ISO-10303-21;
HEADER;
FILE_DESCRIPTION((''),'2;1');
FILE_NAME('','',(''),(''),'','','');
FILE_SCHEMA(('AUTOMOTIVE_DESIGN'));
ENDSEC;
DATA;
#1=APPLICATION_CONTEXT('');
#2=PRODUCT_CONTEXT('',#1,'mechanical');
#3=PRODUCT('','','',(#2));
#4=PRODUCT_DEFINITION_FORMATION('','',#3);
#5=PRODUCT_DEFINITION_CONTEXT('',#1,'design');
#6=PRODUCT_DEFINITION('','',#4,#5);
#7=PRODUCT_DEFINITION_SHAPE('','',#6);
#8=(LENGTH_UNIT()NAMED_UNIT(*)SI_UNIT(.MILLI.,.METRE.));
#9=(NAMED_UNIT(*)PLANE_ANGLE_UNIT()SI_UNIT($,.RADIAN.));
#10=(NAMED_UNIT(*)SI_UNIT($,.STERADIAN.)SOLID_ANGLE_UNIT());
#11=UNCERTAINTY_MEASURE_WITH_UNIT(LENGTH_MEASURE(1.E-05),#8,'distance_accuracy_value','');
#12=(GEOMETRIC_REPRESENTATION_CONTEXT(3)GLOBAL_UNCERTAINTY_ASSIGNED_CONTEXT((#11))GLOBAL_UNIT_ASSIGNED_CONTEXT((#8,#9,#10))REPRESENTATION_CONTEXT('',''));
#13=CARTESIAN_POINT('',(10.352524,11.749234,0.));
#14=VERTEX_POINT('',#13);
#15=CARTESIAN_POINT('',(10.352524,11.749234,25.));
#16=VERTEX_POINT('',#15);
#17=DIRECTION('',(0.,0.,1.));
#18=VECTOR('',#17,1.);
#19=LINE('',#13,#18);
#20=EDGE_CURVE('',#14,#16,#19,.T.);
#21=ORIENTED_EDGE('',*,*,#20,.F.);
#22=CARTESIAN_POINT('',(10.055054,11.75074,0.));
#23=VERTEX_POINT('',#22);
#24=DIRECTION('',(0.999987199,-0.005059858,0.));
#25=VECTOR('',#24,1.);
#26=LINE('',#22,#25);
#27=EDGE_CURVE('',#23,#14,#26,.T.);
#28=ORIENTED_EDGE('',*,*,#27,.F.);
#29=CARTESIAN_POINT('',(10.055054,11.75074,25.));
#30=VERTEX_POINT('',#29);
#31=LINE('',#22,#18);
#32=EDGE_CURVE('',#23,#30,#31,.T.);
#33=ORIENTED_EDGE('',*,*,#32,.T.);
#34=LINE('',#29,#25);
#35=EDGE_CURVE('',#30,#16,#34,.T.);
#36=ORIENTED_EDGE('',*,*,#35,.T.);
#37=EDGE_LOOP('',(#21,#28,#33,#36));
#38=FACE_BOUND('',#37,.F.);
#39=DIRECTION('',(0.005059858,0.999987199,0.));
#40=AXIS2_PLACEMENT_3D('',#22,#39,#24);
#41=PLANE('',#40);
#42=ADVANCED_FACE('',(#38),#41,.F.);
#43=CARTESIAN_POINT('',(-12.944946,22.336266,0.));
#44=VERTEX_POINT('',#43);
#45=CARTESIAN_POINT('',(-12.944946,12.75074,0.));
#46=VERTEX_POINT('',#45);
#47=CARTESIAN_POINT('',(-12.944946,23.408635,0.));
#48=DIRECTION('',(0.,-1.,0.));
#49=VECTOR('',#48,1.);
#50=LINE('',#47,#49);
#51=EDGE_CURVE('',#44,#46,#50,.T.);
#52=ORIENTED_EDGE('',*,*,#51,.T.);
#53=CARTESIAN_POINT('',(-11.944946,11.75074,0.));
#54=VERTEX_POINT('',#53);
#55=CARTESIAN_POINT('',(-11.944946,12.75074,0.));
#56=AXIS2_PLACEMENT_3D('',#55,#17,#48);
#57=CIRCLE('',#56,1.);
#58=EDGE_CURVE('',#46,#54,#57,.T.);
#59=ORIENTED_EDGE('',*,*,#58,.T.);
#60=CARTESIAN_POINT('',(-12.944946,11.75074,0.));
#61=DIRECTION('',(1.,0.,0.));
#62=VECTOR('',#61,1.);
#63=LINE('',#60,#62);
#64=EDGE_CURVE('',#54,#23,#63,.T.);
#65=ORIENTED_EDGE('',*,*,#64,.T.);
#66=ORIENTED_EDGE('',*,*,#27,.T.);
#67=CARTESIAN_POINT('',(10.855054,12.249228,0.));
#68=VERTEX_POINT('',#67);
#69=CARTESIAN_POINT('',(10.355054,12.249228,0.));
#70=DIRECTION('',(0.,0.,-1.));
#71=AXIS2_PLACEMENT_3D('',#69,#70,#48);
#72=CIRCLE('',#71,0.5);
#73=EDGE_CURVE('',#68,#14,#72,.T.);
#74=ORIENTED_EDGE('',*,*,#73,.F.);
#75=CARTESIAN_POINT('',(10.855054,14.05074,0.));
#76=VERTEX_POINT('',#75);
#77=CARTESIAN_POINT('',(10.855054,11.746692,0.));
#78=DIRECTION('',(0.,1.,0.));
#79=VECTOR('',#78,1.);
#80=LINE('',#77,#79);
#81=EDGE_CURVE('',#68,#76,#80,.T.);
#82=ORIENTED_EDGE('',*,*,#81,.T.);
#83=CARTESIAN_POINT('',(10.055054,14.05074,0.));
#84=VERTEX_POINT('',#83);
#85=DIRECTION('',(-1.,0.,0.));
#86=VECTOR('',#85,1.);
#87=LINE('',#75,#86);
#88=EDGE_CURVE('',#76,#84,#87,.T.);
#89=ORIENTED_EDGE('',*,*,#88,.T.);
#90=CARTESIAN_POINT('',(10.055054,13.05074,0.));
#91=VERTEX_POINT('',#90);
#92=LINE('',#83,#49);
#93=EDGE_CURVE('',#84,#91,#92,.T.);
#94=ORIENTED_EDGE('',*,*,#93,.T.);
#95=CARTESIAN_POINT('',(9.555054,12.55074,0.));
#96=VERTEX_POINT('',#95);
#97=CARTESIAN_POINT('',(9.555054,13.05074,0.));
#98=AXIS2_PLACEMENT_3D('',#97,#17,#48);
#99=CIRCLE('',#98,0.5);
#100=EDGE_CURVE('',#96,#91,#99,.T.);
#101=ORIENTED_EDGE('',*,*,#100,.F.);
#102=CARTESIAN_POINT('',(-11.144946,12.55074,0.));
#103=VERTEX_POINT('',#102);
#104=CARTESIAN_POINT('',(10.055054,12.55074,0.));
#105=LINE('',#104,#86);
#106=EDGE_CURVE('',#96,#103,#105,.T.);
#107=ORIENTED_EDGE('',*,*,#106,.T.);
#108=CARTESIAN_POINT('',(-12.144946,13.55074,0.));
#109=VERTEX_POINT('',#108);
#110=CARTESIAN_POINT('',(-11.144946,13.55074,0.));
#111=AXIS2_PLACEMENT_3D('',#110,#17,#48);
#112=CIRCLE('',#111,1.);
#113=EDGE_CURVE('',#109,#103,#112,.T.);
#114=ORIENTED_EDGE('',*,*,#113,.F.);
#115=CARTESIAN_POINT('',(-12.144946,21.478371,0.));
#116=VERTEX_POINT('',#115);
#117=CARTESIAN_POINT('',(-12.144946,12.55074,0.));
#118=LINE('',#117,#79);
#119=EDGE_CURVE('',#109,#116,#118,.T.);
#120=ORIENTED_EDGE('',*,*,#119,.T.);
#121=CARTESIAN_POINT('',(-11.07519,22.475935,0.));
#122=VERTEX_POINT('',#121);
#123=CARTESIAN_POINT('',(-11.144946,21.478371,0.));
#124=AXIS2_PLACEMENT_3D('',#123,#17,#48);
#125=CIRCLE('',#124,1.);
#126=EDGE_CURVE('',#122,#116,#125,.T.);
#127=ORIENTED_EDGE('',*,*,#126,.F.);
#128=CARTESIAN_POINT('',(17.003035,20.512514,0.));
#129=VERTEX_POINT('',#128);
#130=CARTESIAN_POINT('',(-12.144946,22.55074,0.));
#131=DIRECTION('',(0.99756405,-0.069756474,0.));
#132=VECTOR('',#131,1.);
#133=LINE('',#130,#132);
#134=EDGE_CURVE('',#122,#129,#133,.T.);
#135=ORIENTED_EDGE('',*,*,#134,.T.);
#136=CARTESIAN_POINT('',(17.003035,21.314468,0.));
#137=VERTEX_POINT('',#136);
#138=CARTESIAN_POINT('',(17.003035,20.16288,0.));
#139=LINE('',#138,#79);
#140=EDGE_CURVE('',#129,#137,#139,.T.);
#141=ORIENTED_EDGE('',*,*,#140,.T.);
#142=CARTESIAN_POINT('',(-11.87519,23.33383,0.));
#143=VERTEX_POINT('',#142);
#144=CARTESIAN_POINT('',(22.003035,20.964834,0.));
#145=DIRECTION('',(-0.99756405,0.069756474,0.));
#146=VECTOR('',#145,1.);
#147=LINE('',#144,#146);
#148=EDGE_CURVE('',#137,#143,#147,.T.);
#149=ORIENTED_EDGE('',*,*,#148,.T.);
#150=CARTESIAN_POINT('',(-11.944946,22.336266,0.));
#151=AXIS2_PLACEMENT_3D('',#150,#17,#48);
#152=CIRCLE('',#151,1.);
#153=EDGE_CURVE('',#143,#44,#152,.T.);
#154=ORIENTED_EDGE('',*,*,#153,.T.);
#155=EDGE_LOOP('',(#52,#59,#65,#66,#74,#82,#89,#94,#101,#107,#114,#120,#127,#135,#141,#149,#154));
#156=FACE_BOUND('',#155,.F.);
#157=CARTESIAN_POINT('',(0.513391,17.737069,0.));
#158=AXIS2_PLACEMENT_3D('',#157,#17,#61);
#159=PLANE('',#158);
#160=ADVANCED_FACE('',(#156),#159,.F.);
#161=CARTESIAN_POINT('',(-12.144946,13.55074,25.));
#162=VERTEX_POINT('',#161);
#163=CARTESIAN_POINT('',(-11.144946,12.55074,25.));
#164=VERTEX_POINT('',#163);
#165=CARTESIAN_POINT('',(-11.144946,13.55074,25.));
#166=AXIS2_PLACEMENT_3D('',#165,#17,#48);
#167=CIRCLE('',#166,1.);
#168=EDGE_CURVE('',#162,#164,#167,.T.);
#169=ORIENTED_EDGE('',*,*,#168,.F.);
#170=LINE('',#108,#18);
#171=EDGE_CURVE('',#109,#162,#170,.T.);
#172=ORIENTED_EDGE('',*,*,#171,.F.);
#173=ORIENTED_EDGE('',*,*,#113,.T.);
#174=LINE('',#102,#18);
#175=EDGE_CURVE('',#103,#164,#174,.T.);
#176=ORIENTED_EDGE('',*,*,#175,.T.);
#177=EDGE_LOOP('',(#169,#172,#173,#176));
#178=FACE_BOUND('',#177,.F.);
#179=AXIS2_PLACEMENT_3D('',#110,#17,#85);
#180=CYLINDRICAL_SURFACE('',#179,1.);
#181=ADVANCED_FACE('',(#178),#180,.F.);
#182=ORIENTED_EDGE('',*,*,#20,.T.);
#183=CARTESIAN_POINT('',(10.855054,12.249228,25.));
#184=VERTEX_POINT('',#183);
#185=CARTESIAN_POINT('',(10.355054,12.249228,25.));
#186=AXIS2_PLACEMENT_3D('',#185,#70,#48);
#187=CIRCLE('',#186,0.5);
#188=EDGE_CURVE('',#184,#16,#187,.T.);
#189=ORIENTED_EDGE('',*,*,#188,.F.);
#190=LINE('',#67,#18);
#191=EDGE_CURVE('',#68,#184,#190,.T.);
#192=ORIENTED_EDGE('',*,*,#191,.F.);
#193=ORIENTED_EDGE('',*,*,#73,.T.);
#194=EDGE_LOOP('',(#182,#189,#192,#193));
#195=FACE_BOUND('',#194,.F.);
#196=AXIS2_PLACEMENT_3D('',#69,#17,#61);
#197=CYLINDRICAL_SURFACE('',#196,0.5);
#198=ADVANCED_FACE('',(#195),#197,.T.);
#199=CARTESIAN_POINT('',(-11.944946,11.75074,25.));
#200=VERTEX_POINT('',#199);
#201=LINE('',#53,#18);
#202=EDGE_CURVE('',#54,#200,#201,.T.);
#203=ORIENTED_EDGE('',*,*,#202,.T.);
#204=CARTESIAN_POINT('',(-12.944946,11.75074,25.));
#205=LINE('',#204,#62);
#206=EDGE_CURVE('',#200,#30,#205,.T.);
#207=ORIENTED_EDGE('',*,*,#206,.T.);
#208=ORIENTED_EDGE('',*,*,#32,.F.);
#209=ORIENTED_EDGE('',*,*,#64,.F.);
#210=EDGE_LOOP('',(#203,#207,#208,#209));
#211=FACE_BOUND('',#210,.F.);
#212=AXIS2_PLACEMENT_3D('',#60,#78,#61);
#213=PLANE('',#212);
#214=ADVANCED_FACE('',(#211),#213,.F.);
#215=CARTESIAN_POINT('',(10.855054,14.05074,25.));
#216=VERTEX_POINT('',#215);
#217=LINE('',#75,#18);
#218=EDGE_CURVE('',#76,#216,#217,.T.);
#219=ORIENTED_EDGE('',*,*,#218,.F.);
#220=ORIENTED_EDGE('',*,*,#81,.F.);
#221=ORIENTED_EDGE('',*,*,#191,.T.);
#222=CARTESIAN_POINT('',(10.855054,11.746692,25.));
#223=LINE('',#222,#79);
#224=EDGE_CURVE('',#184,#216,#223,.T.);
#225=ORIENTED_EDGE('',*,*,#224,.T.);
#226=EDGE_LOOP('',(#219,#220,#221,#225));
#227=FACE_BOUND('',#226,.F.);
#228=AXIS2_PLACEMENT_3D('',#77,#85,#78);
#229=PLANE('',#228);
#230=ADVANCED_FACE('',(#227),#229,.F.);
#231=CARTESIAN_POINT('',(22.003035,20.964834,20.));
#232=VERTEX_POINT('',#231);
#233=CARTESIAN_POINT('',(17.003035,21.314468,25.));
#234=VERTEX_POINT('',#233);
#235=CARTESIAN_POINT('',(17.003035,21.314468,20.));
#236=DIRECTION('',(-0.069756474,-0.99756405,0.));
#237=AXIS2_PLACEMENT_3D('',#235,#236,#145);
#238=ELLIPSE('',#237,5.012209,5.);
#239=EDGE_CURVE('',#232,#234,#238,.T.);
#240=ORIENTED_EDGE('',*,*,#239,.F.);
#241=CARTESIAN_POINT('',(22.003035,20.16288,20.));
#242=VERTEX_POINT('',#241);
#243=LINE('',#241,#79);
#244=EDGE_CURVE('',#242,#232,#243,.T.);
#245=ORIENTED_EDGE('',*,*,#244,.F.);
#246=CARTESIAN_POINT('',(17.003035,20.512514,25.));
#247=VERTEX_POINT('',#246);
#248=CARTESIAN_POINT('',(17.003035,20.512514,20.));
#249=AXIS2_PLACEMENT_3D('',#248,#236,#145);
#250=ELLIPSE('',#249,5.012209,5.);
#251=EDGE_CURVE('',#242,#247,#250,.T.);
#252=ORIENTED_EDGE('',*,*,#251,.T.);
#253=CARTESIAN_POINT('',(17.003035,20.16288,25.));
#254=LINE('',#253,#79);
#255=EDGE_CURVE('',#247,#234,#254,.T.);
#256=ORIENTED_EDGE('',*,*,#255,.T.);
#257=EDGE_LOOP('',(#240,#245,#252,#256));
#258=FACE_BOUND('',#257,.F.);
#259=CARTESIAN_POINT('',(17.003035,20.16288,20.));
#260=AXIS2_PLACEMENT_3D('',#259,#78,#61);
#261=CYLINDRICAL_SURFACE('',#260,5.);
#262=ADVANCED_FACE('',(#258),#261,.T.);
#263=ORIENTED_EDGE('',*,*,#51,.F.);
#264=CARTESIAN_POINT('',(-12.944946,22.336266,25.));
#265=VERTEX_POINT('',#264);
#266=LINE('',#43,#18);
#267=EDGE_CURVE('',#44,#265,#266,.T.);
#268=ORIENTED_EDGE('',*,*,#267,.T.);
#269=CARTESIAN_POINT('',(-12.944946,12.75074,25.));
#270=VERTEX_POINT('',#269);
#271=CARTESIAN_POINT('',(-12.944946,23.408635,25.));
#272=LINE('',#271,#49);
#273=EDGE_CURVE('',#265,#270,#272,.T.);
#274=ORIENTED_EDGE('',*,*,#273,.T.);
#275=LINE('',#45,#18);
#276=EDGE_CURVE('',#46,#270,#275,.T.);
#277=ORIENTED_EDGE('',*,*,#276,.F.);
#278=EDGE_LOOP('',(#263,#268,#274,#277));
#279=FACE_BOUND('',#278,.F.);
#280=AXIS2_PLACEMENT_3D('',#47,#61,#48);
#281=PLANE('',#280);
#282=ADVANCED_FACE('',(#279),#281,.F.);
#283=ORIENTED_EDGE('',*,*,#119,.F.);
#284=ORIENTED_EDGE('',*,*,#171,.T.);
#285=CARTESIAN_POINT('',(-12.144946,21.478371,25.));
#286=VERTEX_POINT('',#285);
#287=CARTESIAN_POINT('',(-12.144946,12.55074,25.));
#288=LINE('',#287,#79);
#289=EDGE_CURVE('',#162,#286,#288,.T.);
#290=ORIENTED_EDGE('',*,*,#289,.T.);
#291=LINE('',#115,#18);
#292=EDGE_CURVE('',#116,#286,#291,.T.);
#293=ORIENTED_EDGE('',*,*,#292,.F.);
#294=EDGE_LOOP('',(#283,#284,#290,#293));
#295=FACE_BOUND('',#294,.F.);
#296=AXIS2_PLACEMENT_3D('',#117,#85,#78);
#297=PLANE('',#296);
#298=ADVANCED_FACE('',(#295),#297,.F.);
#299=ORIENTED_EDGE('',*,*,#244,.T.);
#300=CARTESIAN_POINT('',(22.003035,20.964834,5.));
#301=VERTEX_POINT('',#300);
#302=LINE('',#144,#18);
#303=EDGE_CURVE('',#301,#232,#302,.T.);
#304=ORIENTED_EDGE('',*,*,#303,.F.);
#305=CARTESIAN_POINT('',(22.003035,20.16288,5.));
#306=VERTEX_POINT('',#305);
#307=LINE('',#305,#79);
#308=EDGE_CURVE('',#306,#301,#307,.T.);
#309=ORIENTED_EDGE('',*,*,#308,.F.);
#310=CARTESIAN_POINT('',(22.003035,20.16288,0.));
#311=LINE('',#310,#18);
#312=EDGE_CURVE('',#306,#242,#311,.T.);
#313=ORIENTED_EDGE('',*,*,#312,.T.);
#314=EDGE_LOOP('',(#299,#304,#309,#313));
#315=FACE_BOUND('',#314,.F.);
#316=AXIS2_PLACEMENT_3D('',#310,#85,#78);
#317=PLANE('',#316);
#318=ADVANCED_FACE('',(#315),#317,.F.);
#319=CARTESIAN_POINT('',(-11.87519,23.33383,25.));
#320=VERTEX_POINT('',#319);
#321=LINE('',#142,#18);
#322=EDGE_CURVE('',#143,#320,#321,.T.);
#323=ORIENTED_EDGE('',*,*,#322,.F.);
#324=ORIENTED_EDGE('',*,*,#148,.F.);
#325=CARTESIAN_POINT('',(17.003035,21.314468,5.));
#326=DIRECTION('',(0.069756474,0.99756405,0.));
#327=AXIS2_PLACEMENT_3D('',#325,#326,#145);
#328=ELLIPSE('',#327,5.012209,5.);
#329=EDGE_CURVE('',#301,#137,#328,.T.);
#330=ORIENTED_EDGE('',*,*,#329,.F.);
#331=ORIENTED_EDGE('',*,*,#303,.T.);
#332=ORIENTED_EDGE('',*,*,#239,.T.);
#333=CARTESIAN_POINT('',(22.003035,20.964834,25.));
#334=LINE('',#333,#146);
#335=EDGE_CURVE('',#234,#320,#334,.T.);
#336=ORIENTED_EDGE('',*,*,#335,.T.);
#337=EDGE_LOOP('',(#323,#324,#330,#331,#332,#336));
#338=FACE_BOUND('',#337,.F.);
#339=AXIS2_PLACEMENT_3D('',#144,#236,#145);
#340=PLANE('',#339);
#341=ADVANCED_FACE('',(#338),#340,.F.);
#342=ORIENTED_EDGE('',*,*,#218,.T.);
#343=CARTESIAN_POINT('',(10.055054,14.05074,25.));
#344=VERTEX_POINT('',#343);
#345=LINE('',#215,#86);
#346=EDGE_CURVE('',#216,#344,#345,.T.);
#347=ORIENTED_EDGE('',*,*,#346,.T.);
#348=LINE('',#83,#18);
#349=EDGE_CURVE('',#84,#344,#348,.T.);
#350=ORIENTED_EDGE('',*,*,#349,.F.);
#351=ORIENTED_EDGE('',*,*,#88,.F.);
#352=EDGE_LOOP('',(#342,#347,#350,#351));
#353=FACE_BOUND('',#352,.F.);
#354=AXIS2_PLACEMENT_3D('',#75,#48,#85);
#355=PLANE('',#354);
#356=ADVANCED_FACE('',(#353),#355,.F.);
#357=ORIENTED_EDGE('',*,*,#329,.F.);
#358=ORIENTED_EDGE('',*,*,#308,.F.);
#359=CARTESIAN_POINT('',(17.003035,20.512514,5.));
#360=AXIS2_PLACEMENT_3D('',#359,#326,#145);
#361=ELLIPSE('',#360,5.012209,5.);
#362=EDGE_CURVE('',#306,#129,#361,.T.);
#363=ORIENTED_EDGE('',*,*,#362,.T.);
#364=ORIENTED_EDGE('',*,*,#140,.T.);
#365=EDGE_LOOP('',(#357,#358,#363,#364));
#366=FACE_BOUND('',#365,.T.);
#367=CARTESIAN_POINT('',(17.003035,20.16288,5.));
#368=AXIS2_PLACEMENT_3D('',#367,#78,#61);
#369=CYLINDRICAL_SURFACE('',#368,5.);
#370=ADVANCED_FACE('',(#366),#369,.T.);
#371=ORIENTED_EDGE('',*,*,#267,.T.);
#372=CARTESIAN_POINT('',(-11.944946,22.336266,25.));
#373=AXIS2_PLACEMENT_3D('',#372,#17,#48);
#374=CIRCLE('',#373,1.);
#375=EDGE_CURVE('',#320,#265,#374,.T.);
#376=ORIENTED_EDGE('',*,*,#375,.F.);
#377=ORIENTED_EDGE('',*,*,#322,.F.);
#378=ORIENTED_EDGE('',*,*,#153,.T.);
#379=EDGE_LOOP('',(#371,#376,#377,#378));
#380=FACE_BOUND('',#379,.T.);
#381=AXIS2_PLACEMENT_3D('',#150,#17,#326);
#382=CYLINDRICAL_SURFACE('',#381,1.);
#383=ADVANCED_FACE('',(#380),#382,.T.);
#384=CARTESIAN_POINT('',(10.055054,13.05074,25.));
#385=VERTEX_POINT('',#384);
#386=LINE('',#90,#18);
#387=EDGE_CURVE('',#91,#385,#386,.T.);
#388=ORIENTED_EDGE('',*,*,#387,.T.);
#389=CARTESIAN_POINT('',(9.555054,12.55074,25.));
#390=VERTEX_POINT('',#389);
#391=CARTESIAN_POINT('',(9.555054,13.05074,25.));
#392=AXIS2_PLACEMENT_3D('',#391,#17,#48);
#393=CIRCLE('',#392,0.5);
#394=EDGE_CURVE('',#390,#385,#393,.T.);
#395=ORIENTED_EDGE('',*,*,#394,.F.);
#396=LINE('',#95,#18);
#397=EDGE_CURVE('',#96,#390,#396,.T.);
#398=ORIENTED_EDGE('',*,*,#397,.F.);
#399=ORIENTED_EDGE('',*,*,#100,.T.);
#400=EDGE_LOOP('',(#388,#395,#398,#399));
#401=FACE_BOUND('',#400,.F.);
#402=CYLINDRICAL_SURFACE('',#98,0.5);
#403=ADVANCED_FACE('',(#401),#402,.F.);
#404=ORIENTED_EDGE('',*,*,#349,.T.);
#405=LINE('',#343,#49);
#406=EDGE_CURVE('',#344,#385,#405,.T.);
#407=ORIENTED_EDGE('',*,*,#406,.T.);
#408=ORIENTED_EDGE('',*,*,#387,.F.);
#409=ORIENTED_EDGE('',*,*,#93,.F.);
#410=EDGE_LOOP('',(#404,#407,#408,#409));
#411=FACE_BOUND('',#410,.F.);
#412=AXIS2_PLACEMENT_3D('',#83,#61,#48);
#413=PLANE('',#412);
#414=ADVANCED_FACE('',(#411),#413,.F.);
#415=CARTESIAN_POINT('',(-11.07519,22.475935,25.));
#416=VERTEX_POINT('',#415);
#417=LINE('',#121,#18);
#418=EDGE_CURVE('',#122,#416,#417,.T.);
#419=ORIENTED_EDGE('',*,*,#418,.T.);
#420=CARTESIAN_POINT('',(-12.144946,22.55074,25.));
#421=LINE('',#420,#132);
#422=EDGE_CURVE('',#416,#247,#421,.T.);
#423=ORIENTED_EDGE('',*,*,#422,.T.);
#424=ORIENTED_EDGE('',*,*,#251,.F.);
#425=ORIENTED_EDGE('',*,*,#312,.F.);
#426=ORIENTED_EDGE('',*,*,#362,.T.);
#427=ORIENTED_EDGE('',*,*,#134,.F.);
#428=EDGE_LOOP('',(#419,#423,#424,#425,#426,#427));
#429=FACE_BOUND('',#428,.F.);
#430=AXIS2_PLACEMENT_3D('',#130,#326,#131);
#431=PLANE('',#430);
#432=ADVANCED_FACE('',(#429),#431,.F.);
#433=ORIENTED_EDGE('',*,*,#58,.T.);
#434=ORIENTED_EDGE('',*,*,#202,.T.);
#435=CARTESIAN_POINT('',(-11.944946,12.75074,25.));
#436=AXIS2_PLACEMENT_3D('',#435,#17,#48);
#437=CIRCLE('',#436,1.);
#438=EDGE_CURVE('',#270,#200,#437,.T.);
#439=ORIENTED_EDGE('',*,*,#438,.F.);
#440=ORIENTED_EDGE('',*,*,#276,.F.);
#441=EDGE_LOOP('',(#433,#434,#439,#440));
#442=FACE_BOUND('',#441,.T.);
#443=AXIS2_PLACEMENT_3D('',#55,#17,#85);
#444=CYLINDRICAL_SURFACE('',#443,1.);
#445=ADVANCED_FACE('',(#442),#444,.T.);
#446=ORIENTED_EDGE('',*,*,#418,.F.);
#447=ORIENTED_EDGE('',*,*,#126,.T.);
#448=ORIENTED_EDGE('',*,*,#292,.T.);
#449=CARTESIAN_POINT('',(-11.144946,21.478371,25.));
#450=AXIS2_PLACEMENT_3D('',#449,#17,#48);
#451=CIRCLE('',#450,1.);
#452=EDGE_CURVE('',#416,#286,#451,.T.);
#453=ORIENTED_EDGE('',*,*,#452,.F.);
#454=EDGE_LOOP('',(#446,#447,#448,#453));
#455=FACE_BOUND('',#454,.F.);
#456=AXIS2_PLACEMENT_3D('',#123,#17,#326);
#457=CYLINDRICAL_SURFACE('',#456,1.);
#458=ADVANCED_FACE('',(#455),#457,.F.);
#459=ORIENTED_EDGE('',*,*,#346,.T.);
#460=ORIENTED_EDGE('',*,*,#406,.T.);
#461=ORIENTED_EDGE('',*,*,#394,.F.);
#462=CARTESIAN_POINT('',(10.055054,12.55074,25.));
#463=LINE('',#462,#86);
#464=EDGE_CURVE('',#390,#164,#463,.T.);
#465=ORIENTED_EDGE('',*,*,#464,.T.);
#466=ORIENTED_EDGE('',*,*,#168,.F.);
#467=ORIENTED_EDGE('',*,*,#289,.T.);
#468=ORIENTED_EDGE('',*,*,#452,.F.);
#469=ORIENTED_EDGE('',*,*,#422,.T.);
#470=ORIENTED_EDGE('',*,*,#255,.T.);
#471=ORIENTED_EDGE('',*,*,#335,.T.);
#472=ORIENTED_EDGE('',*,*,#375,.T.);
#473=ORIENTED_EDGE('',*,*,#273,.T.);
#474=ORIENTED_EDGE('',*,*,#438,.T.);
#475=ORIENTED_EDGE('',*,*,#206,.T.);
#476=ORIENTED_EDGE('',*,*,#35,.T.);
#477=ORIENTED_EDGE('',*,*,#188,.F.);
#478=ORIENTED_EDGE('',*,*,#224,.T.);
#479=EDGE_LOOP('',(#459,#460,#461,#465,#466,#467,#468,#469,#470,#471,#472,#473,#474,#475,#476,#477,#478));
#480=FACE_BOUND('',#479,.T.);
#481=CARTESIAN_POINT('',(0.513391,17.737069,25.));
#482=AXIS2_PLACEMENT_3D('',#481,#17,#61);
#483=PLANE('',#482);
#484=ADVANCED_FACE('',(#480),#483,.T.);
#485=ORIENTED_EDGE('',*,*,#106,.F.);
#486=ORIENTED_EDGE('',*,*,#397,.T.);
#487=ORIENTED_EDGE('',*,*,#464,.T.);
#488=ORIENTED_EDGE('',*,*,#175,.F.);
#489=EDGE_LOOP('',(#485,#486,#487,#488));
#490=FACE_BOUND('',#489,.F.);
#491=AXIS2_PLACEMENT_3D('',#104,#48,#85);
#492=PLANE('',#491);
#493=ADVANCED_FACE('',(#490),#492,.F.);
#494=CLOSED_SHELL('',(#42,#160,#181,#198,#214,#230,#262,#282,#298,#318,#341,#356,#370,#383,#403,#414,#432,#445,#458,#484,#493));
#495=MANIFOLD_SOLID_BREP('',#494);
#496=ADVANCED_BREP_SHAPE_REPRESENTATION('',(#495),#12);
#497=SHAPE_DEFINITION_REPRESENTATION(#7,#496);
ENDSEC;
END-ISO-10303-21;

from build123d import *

# Parameters (mm, degrees)
F1_DEPTH = 25
F2_R     = 5
F3_R     = 1
F4_R     = 0.5


# Not quite as in the source:
# - a feature names something its author has since deleted; it is built from what else it names


with BuildPart() as f1:
    # F0 (on Top) → F1 (new body)
    with BuildSketch(Plane.XY):
        Polygon((-12.9449461493, 23.2145217315), (-12.9449461493, 11.7507396201), (10.0550538507, 11.7507396201), (10.8550538507, 11.7466916821), (10.8550538507, 14.0507396201), (10.0550538507, 14.0507396201), (10.0550538507, 12.5507396201), (-12.1449461493, 12.5507396201), (-12.1449461493, 22.5507396201), (22.0030346708, 20.162880187), (22.0030346708, 20.9648337055), (-12.9449461493, 23.4086345881), align=None)
    extrude(amount=F1_DEPTH)

    # F2
    f2_edges = [f1.edges().sort_by_distance(p)[0] for p in [
        (22.003035, 20.563857, 25),
        (22.003035, 20.563857, 0),
    ]]
    fillet(f2_edges, radius=F2_R)

    # F3
    f3_edges = [f1.edges().sort_by_distance(p)[0] for p in [
        (-12.944946, 11.75074, 12.5),
        (-12.144946, 12.55074, 12.5),
        (-12.944946, 23.408635, 12.5),
        (-12.144946, 22.55074, 12.5),
    ]]
    fillet(f3_edges, radius=F3_R)

    # F4
    f4_edges = [f1.edges().sort_by_distance(p)[0] for p in [
        (10.855054, 11.746692, 12.5),
        (10.055054, 12.55074, 12.5),
    ]]
    fillet(f4_edges, radius=F4_R)


solid = f1.part
